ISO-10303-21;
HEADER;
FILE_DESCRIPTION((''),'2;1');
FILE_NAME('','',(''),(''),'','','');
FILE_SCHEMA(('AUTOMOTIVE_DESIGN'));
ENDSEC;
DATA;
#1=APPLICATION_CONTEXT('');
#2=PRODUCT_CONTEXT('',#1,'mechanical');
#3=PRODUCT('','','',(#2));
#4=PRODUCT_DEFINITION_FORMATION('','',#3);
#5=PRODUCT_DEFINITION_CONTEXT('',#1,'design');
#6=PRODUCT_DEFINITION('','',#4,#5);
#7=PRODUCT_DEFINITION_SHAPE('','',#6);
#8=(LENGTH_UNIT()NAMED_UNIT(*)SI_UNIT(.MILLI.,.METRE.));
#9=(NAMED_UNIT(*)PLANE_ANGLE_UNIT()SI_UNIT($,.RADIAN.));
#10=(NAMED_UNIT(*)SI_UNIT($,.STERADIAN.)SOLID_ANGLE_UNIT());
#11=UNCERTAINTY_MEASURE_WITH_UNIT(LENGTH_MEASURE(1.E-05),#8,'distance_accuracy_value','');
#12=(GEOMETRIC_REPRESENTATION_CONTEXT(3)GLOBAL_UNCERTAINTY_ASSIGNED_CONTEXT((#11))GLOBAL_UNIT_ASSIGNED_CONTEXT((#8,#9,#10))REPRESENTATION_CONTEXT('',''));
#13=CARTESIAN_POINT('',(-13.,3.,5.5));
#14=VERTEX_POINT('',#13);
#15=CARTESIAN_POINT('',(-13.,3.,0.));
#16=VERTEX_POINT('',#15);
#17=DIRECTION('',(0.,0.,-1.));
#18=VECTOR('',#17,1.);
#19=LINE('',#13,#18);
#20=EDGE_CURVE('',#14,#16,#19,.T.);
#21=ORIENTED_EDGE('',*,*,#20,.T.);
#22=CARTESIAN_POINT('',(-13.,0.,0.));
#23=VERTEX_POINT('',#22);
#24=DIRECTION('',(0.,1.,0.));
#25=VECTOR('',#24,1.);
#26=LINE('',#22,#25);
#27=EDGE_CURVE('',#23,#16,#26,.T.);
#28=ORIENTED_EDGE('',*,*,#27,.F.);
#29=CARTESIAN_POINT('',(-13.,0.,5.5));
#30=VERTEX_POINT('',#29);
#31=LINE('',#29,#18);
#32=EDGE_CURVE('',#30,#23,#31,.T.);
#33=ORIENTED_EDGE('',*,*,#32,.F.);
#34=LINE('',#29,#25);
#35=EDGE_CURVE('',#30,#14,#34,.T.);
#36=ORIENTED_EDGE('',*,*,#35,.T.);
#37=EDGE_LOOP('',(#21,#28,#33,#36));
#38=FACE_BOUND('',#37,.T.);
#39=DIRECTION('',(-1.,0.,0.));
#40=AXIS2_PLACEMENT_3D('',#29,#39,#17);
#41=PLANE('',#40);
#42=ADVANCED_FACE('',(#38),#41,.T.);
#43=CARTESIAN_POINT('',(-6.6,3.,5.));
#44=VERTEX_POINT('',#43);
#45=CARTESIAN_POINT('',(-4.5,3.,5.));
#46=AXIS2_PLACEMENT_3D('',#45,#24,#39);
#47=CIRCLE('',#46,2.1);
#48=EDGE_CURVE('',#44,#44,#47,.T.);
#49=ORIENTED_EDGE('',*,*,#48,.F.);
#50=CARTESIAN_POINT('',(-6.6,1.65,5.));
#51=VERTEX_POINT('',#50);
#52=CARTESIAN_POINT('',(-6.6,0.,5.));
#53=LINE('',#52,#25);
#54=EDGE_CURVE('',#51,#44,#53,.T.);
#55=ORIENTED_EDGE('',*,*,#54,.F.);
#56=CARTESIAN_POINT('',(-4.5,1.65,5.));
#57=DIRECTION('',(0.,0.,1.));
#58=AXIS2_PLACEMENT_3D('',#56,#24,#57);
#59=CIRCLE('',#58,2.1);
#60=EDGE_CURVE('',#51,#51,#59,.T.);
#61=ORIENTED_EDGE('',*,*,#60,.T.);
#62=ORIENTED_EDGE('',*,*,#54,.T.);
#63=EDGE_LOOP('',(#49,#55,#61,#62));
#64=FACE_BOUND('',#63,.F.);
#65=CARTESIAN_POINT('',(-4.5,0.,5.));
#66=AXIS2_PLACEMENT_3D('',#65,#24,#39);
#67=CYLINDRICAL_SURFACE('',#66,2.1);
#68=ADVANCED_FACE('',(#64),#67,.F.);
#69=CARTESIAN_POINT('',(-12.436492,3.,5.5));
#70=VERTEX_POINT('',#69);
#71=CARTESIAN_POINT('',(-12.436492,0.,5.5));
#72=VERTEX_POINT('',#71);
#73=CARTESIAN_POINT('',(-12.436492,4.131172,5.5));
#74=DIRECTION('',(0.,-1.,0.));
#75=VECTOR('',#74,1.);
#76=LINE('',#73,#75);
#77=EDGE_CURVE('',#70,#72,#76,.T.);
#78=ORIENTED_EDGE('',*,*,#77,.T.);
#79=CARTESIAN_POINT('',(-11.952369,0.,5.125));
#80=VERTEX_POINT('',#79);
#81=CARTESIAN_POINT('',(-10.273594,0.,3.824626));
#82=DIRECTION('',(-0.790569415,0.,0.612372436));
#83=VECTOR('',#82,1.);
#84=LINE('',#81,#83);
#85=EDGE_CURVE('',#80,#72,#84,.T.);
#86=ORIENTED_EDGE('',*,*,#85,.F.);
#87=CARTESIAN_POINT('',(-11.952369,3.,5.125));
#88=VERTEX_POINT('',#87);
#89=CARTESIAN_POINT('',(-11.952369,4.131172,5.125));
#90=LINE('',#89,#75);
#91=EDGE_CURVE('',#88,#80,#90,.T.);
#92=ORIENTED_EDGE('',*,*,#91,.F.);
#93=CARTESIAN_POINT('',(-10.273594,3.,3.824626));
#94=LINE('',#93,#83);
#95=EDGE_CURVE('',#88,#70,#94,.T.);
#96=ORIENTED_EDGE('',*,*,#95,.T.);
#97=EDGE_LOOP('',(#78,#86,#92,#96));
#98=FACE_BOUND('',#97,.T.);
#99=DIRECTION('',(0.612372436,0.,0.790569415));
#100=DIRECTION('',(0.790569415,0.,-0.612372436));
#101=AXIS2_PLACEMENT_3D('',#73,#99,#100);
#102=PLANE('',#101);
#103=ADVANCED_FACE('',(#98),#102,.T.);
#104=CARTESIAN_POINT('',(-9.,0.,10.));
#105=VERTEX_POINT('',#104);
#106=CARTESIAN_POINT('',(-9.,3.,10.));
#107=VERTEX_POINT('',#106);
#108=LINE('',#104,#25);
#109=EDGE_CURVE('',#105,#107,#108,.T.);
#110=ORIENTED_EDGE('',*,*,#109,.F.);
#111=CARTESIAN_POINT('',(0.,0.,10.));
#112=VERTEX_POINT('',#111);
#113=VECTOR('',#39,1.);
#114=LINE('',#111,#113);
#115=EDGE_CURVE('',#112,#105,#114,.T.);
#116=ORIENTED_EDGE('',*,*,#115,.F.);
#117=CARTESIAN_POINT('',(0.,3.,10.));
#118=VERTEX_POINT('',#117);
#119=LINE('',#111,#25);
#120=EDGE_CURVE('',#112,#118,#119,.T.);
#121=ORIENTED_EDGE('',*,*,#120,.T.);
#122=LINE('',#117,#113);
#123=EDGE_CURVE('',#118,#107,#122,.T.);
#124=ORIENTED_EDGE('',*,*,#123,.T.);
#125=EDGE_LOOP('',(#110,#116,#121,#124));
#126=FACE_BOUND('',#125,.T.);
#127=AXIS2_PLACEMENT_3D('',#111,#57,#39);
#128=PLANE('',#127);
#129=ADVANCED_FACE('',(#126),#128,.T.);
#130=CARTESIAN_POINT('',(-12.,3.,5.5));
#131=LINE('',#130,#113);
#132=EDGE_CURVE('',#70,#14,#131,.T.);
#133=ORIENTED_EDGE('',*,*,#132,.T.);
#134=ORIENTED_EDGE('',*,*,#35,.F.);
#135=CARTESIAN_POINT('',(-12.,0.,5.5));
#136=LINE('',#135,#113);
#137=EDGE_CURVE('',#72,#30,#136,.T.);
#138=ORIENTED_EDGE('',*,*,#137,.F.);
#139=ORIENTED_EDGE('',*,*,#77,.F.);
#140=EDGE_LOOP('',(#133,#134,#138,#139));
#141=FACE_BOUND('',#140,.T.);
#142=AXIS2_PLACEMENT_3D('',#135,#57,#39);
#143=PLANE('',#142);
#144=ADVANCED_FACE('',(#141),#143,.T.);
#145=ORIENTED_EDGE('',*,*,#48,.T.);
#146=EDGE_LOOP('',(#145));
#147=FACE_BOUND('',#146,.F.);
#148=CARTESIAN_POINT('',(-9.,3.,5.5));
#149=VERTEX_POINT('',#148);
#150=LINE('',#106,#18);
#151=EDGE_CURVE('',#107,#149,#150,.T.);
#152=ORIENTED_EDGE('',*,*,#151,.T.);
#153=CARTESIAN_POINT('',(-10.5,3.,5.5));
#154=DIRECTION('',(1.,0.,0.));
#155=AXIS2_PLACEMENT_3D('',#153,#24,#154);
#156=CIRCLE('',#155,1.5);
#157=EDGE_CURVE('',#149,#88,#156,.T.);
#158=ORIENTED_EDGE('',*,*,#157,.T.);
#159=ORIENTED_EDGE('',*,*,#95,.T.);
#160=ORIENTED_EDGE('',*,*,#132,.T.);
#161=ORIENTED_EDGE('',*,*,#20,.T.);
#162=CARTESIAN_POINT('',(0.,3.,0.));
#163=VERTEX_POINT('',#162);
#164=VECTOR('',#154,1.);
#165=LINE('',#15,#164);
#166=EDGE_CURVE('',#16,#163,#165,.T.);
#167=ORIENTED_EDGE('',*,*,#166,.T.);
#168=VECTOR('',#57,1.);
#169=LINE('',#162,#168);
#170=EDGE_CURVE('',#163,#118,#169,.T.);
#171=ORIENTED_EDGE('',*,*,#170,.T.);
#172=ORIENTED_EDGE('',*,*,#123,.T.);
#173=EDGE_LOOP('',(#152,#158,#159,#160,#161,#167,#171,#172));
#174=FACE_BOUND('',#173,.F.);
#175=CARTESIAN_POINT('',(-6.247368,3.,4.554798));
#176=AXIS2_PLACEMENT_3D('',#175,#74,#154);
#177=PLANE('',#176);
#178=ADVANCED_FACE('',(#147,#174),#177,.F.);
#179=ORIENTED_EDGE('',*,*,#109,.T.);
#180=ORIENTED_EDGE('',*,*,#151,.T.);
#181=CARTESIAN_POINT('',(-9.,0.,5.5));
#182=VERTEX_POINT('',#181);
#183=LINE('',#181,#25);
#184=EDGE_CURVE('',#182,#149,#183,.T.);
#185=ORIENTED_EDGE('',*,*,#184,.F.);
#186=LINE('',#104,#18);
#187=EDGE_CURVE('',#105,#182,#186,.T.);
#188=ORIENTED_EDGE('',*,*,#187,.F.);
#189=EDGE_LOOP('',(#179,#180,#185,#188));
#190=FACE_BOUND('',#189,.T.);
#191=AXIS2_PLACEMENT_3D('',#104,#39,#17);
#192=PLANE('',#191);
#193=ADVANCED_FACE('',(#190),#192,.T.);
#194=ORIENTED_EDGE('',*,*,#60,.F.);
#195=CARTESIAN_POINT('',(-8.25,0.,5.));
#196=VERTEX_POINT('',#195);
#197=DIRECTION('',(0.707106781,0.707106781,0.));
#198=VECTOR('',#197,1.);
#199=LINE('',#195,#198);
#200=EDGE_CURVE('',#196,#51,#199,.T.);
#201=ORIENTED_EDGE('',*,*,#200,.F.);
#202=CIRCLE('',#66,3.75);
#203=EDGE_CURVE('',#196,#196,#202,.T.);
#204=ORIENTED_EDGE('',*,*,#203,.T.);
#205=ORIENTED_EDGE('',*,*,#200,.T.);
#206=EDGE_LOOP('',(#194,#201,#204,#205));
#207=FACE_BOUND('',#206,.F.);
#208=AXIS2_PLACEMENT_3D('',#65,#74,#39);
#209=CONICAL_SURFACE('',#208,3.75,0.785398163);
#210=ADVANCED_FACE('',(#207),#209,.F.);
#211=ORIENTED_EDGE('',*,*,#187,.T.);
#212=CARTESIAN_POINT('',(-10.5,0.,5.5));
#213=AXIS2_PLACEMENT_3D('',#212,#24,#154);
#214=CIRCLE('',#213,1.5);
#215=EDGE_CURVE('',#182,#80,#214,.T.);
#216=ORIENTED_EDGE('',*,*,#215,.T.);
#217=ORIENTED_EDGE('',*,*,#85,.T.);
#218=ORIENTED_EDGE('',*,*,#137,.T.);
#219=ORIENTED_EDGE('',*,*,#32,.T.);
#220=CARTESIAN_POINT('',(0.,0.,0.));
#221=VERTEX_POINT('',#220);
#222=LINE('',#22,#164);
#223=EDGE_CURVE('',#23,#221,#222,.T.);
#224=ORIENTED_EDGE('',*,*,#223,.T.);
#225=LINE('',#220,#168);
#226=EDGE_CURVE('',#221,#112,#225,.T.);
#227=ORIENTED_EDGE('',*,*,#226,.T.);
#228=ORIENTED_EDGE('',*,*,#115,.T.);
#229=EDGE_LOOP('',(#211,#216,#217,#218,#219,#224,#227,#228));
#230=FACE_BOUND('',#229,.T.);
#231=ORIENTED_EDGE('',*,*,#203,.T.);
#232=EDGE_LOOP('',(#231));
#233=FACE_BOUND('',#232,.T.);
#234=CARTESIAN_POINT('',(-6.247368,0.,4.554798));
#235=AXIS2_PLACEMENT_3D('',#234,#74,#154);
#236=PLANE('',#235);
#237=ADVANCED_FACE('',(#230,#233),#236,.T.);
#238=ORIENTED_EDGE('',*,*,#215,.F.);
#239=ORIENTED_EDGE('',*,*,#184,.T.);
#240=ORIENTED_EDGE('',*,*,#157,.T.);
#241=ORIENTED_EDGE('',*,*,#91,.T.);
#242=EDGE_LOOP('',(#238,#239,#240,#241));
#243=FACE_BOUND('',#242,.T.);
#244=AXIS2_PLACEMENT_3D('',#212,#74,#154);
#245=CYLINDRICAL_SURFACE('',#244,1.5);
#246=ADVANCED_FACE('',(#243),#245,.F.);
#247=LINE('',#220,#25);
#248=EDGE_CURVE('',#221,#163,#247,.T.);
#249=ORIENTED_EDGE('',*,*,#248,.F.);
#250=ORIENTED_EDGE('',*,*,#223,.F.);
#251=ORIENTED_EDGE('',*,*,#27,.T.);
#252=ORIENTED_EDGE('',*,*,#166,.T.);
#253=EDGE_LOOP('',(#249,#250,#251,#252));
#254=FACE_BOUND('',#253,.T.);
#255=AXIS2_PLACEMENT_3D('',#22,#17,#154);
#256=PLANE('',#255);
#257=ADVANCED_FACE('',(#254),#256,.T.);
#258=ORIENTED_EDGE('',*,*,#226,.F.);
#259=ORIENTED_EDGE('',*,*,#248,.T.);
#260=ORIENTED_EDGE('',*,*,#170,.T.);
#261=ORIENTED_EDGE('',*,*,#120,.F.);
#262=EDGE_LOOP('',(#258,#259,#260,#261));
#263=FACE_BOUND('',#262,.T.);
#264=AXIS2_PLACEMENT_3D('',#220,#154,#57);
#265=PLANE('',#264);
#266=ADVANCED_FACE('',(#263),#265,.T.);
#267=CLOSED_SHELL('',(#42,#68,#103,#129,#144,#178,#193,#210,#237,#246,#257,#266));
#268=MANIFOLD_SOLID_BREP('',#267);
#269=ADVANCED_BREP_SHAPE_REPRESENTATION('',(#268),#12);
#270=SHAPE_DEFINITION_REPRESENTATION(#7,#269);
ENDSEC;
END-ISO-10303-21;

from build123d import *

# Parameters (mm, degrees)
F1_DEPTH       = 3
F3_D           = 4.2
F3_CSINK_D     = 7.5
F3_CSINK_ANGLE = 90
F4_T1_DEPTH    = 5.2623442452


# Not quite as in the source:
# - a fillet or chamfer that OpenCascade refuses, or shapes differently, is made with other operations: its cross-section is extruded or revolved along the edge and cut away or added


with BuildPart() as f1:
    # F0 (on Front) → F1 (new body)
    with BuildSketch(Plane.XZ):
        with BuildLine():
            Line((-13, 0), (0, 0))
            Line((0, 0), (0, 10))
            Line((0, 10), (-9, 10))
            Line((-9, 10), (-9, 5.5))
            ThreePointArc((-9, 5.5), (-10.5, 4), (-12, 5.5))
            Line((-12, 5.5), (-13, 5.5))
            Line((-13, 5.5), (-13, 0))
        make_face()
    extrude(amount=-F1_DEPTH)

    # F3 (through all)
    with Locations(Plane.XZ):
        with Locations((-4.5, 5)):
            CounterSinkHole(F3_D / 2, F3_CSINK_D / 2, counter_sink_angle=F3_CSINK_ANGLE)

    # F4: chamfer of 0.5 on 1 edges, made by hand

    # F4_s2 → F4_t1 (cut)
    with BuildSketch(Plane.XZ.offset(-4.1311721226)):
        with BuildLine():
            Line((-12.4364916731, 5.5), (-11.9523687548, 5.125))
            ThreePointArc((-11.9523687548, 5.125), (-11.9871251619, 5.3038909672), (-12, 5.5))
            Line((-12, 5.5), (-12.4364916731, 5.5))
        make_face()
    extrude(amount=F4_T1_DEPTH, mode=Mode.SUBTRACT)


solid = f1.part
